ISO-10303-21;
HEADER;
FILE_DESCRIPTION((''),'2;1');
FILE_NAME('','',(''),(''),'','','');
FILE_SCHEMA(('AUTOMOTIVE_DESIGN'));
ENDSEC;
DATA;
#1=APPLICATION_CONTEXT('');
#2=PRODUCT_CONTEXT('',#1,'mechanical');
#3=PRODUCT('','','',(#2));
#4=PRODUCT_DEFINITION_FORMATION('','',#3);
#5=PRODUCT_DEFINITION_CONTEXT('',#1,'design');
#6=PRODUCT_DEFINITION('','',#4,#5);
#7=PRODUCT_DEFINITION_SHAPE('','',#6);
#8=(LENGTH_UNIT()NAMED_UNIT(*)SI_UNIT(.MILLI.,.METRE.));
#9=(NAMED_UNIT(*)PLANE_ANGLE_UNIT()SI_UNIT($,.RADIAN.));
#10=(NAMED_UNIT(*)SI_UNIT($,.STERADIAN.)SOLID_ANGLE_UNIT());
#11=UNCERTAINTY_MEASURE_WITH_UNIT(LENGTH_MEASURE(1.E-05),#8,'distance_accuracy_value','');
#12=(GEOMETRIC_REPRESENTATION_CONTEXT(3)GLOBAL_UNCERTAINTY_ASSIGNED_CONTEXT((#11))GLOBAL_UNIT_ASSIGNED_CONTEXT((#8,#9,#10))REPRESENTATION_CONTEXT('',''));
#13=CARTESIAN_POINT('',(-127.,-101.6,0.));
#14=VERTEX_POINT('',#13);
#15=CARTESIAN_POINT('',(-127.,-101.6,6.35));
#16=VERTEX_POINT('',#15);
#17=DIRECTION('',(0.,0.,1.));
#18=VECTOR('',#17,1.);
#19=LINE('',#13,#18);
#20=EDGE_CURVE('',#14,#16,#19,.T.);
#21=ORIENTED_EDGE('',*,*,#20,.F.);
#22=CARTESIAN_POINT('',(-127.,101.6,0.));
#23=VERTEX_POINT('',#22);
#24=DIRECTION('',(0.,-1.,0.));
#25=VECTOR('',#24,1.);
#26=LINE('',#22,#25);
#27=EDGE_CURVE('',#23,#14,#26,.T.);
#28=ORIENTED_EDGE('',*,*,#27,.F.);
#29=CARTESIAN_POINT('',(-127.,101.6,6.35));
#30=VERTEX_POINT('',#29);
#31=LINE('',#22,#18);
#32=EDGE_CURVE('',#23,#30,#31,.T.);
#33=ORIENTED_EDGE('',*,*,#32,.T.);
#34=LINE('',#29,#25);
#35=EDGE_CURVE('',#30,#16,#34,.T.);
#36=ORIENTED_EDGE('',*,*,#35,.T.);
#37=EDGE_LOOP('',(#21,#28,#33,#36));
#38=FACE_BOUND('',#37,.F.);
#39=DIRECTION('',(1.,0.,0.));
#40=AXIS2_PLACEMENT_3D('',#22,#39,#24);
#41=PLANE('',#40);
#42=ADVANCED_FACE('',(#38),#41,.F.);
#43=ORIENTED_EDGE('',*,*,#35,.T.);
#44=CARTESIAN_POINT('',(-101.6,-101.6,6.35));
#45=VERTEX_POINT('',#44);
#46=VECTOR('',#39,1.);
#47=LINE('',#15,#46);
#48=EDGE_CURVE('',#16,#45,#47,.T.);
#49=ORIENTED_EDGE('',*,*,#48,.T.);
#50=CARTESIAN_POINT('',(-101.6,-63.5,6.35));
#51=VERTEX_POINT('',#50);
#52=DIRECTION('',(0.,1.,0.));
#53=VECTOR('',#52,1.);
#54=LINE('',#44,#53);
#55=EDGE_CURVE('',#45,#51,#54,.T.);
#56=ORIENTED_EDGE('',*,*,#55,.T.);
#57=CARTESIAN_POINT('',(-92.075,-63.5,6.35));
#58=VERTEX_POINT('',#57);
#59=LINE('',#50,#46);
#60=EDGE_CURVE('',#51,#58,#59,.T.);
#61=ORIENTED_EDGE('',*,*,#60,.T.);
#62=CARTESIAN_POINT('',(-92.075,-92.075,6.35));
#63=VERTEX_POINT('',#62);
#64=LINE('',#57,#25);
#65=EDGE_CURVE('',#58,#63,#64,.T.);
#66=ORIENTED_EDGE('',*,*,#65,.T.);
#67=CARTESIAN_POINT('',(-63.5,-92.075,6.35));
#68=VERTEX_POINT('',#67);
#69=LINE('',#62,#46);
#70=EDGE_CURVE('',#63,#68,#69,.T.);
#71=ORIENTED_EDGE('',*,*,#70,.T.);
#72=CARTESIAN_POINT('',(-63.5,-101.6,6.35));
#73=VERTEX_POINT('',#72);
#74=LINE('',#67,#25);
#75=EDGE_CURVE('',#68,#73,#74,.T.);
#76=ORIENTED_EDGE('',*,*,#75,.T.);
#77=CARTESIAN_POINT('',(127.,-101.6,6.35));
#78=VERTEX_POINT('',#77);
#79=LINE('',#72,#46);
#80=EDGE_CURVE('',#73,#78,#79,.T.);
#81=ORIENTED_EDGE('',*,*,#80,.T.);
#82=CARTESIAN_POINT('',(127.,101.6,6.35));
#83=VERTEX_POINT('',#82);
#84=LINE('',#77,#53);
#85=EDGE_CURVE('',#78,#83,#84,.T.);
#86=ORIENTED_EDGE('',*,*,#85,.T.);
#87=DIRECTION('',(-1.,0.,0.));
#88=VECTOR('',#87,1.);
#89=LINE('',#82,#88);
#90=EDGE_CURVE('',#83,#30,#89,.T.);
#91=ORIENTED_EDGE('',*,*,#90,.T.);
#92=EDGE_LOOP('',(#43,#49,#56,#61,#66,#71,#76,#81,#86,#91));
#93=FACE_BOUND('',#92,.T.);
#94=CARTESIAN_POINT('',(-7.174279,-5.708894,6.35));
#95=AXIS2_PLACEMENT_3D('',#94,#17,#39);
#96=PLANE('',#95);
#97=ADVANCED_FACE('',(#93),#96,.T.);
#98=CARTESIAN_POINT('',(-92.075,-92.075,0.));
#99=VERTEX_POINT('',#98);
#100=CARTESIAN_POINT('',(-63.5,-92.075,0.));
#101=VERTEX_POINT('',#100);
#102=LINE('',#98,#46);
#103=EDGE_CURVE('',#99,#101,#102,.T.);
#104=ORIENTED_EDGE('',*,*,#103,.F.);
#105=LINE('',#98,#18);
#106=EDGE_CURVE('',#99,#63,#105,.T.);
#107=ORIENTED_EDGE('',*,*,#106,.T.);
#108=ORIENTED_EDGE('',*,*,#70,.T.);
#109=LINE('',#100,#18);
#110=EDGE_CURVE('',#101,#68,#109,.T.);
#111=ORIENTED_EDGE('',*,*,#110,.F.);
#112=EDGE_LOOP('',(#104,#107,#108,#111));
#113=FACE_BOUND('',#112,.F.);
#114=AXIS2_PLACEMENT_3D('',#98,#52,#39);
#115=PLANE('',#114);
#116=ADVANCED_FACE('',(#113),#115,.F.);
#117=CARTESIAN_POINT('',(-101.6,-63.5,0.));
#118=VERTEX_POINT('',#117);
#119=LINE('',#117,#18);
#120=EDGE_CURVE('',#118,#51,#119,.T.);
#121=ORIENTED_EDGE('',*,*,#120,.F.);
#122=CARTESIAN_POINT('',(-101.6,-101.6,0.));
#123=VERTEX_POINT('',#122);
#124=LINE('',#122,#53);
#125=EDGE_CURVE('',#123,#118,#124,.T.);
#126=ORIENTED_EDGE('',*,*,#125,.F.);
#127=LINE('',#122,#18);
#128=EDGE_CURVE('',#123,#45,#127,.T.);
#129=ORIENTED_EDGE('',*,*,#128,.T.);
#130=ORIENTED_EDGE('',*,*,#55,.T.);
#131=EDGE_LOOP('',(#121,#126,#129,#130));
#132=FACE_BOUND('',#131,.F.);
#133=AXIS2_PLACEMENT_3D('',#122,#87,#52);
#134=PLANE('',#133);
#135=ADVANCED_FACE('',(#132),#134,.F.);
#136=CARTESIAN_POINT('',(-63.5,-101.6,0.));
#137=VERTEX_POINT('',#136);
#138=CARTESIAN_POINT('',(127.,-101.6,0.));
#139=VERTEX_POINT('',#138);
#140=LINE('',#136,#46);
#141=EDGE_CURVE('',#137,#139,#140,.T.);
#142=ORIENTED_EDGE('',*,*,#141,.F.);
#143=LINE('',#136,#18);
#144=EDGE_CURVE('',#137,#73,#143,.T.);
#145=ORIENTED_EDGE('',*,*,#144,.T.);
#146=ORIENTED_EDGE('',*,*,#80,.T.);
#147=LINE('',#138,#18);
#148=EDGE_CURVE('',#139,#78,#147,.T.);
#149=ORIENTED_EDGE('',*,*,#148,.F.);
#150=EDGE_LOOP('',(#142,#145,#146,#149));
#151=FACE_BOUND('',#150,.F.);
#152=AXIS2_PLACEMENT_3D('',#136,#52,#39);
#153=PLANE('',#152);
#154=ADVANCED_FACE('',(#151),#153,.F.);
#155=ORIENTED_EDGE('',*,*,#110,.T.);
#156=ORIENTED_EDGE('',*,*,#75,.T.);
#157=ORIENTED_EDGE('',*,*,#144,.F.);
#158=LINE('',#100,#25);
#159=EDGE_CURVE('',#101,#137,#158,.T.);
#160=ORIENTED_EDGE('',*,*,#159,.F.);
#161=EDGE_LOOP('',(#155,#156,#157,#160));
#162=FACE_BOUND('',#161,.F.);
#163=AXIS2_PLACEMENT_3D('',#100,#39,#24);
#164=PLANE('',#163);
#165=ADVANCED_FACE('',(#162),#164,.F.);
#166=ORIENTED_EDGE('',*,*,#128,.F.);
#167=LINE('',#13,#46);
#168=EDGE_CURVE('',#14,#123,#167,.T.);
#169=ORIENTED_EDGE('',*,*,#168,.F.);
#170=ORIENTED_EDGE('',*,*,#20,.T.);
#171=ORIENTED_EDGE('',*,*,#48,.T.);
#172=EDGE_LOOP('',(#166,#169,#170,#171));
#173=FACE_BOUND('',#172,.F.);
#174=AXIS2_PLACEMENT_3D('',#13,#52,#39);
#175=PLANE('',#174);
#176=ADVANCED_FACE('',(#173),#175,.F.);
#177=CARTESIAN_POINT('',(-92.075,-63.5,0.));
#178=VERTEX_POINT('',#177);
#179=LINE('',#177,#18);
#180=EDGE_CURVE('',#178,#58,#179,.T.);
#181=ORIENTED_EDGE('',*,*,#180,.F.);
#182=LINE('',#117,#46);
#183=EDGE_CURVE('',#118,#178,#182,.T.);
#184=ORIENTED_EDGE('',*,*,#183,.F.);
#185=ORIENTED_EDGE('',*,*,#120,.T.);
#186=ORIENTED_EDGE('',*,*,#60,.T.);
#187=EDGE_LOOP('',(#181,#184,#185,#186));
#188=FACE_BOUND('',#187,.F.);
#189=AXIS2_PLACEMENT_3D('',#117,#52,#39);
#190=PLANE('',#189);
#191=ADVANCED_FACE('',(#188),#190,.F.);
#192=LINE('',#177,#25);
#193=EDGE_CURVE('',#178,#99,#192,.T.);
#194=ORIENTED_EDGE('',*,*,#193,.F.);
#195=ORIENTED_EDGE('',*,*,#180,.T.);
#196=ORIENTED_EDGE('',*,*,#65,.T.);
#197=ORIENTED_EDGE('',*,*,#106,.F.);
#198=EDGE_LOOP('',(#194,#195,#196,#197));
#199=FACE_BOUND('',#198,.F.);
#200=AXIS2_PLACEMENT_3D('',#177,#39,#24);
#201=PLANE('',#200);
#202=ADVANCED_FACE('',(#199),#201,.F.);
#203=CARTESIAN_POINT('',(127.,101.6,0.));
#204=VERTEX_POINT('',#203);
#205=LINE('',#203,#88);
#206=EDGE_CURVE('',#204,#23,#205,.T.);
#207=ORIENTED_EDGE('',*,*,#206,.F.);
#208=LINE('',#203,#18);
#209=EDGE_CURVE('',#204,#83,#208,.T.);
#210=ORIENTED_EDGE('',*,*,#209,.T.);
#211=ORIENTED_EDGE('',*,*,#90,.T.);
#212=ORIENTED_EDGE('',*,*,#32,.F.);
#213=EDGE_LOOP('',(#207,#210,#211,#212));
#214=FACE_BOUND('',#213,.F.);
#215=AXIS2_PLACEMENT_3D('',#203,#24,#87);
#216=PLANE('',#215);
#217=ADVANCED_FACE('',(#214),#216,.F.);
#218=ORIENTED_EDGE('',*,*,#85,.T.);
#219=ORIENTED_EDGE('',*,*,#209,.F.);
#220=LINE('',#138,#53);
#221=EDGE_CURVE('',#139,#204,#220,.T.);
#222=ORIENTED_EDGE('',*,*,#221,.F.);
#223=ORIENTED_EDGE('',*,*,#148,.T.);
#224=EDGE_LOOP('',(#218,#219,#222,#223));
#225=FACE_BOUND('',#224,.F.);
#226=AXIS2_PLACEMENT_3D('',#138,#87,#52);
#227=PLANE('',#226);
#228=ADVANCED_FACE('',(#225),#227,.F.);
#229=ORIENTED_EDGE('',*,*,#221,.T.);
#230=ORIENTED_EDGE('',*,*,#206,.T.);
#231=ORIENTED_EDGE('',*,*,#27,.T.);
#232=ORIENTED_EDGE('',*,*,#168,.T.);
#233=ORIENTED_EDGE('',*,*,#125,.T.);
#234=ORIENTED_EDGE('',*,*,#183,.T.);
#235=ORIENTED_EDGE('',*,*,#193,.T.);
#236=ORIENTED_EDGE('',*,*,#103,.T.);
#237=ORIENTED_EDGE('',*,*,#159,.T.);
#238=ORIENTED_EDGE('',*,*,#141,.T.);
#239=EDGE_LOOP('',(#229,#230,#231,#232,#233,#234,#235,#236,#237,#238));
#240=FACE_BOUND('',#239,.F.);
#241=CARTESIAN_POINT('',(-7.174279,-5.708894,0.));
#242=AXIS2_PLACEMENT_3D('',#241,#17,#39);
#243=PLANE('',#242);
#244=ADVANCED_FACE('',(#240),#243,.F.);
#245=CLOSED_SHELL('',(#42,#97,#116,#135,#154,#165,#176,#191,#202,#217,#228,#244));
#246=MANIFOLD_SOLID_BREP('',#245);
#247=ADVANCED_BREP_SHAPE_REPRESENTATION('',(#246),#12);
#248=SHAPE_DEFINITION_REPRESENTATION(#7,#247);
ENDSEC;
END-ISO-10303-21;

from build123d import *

# Parameters (mm, degrees)
F1_DEPTH = 6.35


# Not quite as in the source:
# - a feature of the source that left no trace in its solid (it failed there, or was rolled back) is left out


with BuildPart() as f1:
    # F0 (on Top) → F1 (new body)
    with BuildSketch(Plane.XY):
        Polygon((127, -101.6), (127, 101.6), (-127, 101.6), (-127, -101.6), (-101.6, -101.6), (-101.6, -63.5), (-92.075, -63.5), (-92.075, -92.075), (-63.5, -92.075), (-63.5, -101.6), align=None)
    extrude(amount=F1_DEPTH)


solid = f1.part
